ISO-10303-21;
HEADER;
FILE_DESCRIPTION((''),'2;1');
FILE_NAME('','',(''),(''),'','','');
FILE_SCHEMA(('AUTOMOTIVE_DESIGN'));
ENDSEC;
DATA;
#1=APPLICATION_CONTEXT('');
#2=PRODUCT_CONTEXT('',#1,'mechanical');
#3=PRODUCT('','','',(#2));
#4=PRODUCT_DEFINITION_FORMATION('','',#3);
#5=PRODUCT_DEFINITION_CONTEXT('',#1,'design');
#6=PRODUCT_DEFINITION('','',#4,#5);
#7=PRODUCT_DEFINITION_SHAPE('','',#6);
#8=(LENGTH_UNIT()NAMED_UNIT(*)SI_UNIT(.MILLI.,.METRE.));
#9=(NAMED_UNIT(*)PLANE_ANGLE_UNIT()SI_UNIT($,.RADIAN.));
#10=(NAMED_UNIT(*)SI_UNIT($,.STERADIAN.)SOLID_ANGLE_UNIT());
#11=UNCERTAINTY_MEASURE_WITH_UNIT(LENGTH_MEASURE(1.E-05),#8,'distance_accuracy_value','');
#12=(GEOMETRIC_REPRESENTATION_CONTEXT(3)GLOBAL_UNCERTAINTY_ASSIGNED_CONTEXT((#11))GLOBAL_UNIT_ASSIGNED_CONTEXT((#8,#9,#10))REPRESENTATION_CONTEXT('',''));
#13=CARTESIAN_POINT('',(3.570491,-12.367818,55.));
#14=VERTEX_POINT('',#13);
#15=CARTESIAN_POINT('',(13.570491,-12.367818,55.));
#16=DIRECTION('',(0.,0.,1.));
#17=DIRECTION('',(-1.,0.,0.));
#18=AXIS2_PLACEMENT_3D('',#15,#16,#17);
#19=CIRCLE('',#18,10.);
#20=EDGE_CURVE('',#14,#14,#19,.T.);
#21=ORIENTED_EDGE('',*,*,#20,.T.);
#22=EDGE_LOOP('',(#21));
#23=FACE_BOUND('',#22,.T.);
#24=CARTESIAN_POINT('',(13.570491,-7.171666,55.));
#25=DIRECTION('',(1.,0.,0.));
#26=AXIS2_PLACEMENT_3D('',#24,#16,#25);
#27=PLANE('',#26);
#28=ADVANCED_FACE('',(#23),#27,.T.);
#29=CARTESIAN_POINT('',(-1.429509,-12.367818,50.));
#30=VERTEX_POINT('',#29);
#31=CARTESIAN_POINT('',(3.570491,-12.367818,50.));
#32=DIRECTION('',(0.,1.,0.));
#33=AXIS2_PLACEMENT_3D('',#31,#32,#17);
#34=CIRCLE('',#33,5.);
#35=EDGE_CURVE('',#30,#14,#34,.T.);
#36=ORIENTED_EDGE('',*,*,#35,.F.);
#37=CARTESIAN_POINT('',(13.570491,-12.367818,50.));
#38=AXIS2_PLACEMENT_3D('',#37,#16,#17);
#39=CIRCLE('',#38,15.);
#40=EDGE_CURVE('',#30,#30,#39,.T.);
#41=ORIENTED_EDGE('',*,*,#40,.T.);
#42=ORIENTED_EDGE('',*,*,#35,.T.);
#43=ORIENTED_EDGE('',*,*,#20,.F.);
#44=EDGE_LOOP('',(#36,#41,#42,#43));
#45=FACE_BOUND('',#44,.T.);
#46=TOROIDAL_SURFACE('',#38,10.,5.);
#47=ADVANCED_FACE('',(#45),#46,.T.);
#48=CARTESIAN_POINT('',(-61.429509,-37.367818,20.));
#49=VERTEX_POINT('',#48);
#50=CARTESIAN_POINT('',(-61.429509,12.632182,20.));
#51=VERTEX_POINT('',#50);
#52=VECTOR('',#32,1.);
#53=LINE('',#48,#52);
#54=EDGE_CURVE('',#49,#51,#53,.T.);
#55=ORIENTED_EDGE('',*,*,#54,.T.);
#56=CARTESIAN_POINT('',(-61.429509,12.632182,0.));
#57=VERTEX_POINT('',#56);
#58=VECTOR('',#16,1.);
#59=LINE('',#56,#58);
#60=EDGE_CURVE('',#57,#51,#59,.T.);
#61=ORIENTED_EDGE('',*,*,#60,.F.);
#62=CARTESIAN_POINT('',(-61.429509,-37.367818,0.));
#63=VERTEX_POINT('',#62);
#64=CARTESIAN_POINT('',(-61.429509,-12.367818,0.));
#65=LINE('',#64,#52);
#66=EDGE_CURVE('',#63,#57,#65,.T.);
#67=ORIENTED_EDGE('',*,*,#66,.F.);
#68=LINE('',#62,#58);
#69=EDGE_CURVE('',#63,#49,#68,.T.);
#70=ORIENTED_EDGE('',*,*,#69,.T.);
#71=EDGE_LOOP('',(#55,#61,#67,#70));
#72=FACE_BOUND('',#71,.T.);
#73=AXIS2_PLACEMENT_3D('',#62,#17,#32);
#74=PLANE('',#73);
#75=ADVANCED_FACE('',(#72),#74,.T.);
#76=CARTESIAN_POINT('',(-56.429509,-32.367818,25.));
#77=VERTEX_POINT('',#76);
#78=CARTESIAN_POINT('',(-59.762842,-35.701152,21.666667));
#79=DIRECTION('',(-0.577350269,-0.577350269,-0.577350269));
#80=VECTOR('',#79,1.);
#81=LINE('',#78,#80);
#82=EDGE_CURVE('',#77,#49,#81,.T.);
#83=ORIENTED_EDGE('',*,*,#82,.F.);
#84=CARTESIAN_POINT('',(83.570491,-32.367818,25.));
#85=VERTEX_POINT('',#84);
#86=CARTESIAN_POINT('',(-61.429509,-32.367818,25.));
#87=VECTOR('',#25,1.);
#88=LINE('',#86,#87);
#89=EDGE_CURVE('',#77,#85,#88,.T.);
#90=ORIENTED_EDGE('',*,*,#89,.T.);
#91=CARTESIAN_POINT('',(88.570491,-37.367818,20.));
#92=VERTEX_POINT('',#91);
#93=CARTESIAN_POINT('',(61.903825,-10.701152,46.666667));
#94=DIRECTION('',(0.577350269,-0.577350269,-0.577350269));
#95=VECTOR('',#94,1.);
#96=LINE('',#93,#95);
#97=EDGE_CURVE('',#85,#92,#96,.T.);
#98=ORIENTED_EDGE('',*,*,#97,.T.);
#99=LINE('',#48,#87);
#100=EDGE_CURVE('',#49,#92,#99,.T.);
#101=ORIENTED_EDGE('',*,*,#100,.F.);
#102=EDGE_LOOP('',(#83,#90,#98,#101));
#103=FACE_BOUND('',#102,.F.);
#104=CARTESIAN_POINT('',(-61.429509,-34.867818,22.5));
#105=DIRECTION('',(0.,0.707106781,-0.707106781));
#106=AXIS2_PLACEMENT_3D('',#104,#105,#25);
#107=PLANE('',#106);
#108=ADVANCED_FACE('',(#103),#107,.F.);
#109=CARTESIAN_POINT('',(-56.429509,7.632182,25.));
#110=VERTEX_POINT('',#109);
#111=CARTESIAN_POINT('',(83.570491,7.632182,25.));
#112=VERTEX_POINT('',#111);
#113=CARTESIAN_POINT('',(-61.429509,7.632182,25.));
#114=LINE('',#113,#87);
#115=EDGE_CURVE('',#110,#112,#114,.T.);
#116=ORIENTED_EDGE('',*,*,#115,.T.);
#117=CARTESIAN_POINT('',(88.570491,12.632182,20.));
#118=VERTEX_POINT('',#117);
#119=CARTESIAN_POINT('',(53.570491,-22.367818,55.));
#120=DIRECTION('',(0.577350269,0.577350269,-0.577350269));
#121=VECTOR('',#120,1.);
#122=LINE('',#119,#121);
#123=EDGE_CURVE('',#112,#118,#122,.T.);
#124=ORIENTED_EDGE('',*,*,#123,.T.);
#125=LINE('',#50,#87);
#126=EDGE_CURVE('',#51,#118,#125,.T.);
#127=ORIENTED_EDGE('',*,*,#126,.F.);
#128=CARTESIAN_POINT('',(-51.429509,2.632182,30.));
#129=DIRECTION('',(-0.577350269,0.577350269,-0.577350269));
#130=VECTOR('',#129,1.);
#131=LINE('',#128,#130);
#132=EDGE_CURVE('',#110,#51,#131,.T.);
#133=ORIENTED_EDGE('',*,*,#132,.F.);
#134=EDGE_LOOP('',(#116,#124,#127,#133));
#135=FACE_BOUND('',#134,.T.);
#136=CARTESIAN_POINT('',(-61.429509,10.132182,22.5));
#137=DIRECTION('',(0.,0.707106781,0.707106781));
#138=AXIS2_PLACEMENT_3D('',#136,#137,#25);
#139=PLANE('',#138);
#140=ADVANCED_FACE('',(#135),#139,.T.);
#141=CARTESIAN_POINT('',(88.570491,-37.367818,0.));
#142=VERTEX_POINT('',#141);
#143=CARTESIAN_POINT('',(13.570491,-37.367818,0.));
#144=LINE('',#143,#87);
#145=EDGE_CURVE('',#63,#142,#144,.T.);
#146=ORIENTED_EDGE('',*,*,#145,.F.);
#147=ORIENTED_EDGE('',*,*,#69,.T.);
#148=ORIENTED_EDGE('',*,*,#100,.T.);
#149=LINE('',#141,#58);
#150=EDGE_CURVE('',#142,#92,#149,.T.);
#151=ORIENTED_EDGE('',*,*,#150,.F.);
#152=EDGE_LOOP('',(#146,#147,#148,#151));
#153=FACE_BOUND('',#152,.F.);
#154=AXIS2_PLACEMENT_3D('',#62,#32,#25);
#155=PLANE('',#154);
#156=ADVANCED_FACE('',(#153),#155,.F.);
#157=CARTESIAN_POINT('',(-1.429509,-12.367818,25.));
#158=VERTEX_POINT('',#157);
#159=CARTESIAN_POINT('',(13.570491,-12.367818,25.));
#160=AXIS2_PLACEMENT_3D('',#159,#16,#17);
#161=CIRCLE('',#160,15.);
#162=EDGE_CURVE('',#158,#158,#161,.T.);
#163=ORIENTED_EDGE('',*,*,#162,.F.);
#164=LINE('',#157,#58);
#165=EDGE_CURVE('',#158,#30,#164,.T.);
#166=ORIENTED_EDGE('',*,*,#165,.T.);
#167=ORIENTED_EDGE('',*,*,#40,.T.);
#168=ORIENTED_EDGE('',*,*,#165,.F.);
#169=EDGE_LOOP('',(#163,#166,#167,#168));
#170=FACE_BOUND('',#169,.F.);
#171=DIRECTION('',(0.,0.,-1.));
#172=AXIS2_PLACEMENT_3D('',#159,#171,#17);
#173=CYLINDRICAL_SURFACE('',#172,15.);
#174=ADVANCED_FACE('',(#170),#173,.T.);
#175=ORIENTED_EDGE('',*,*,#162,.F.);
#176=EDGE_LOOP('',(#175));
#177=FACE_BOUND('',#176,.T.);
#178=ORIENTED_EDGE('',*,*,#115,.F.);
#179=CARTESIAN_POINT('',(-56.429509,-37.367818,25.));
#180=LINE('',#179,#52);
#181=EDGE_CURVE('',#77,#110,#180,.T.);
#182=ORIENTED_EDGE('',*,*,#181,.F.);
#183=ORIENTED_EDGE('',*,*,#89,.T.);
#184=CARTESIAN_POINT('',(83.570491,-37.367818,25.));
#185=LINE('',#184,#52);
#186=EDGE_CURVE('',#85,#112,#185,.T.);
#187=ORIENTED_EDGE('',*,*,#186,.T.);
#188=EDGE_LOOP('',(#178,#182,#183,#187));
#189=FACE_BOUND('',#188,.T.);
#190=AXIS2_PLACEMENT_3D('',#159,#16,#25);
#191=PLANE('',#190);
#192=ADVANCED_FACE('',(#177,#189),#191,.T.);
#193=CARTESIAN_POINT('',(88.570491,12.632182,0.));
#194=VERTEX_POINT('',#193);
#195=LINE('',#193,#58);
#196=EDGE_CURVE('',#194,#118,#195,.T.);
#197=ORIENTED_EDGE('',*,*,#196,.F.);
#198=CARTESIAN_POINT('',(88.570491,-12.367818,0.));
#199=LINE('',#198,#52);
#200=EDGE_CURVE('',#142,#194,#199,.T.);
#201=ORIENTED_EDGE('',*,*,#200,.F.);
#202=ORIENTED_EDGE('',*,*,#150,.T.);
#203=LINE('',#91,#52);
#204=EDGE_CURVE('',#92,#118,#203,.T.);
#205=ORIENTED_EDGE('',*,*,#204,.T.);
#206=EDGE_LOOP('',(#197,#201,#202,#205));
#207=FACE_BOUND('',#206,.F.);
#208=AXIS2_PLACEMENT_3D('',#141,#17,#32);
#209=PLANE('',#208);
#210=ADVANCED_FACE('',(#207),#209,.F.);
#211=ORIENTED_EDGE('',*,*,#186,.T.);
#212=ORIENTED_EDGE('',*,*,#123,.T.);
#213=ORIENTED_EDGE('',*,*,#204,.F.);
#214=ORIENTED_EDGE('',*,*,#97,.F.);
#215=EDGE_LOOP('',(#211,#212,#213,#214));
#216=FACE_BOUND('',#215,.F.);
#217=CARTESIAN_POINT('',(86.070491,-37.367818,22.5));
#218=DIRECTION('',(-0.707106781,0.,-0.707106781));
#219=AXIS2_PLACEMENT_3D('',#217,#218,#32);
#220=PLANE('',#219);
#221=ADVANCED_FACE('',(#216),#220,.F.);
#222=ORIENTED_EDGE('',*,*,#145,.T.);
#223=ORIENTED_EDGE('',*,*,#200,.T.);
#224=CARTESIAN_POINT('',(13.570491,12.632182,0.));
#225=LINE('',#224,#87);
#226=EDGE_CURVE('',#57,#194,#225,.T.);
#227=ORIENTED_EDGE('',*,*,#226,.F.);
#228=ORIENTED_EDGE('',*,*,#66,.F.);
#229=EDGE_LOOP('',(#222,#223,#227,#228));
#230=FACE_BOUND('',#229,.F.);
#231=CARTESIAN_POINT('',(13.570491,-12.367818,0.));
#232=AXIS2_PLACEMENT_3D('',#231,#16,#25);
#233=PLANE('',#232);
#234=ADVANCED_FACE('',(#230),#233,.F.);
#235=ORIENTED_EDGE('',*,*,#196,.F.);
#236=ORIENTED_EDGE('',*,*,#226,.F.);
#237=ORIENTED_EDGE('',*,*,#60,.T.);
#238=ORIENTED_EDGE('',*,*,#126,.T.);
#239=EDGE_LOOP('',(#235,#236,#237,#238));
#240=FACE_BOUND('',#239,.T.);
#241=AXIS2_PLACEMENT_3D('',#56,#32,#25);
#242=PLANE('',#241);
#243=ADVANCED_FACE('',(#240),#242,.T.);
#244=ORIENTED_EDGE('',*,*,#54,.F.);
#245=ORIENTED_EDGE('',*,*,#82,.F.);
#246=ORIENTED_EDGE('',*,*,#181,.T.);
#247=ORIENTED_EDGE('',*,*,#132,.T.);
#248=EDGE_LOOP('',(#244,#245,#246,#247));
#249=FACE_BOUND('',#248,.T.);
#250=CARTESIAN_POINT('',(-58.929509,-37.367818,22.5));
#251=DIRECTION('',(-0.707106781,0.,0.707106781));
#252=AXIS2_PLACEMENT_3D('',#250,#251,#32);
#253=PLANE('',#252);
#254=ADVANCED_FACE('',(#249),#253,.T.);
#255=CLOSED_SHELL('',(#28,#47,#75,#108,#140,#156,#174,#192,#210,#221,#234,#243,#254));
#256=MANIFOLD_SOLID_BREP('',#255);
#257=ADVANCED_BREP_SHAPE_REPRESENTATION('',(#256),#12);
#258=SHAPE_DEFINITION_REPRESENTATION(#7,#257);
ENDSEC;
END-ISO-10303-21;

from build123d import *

# Parameters (mm, degrees)
F0_W     = 150
F0_H     = 50
F1_DEPTH = 25
F3_DEPTH = 30
F4_R     = 5
F5_SIZE  = 5


with BuildPart() as f1:
    # F0 (on Top) → F1 (new body)
    with BuildSketch(Plane.XY):
        with Locations((13.5704912245, -12.3678184533)):
            Rectangle(F0_W, F0_H)
    extrude(amount=F1_DEPTH)

    # F2 (on face) → F3 (join)
    with BuildSketch(Plane.XY.offset(25)):
        with BuildLine():
            Line((-1.4295087755, -12.3678184533), (28.5704912245, -12.3678184533))
            ThreePointArc((28.5704912245, -12.3678184533), (13.5704912245, 2.6321815467), (-1.4295087755, -12.3678184533))
        make_face()
        with BuildLine():
            ThreePointArc((-1.4295087755, -12.3678184533), (13.5704912245, -27.3678184533), (28.5704912245, -12.3678184533))
            Line((28.5704912245, -12.3678184533), (-1.4295087755, -12.3678184533))
        make_face()
    extrude(amount=F3_DEPTH)

    # F4
    f4_edges = [f1.edges().sort_by_distance(p)[0] for p in [
        (28.570491, -12.367818, 55),
    ]]
    fillet(f4_edges, radius=F4_R)

    # F5
    f5_edges = [f1.edges().sort_by_distance(p)[0] for p in [
        (-61.429509, -12.367818, 25),
        (13.570491, -37.367818, 25),
        (13.570491, 12.632182, 25),
        (88.570491, -12.367818, 25),
    ]]
    chamfer(f5_edges, length=F5_SIZE)


solid = f1.part
